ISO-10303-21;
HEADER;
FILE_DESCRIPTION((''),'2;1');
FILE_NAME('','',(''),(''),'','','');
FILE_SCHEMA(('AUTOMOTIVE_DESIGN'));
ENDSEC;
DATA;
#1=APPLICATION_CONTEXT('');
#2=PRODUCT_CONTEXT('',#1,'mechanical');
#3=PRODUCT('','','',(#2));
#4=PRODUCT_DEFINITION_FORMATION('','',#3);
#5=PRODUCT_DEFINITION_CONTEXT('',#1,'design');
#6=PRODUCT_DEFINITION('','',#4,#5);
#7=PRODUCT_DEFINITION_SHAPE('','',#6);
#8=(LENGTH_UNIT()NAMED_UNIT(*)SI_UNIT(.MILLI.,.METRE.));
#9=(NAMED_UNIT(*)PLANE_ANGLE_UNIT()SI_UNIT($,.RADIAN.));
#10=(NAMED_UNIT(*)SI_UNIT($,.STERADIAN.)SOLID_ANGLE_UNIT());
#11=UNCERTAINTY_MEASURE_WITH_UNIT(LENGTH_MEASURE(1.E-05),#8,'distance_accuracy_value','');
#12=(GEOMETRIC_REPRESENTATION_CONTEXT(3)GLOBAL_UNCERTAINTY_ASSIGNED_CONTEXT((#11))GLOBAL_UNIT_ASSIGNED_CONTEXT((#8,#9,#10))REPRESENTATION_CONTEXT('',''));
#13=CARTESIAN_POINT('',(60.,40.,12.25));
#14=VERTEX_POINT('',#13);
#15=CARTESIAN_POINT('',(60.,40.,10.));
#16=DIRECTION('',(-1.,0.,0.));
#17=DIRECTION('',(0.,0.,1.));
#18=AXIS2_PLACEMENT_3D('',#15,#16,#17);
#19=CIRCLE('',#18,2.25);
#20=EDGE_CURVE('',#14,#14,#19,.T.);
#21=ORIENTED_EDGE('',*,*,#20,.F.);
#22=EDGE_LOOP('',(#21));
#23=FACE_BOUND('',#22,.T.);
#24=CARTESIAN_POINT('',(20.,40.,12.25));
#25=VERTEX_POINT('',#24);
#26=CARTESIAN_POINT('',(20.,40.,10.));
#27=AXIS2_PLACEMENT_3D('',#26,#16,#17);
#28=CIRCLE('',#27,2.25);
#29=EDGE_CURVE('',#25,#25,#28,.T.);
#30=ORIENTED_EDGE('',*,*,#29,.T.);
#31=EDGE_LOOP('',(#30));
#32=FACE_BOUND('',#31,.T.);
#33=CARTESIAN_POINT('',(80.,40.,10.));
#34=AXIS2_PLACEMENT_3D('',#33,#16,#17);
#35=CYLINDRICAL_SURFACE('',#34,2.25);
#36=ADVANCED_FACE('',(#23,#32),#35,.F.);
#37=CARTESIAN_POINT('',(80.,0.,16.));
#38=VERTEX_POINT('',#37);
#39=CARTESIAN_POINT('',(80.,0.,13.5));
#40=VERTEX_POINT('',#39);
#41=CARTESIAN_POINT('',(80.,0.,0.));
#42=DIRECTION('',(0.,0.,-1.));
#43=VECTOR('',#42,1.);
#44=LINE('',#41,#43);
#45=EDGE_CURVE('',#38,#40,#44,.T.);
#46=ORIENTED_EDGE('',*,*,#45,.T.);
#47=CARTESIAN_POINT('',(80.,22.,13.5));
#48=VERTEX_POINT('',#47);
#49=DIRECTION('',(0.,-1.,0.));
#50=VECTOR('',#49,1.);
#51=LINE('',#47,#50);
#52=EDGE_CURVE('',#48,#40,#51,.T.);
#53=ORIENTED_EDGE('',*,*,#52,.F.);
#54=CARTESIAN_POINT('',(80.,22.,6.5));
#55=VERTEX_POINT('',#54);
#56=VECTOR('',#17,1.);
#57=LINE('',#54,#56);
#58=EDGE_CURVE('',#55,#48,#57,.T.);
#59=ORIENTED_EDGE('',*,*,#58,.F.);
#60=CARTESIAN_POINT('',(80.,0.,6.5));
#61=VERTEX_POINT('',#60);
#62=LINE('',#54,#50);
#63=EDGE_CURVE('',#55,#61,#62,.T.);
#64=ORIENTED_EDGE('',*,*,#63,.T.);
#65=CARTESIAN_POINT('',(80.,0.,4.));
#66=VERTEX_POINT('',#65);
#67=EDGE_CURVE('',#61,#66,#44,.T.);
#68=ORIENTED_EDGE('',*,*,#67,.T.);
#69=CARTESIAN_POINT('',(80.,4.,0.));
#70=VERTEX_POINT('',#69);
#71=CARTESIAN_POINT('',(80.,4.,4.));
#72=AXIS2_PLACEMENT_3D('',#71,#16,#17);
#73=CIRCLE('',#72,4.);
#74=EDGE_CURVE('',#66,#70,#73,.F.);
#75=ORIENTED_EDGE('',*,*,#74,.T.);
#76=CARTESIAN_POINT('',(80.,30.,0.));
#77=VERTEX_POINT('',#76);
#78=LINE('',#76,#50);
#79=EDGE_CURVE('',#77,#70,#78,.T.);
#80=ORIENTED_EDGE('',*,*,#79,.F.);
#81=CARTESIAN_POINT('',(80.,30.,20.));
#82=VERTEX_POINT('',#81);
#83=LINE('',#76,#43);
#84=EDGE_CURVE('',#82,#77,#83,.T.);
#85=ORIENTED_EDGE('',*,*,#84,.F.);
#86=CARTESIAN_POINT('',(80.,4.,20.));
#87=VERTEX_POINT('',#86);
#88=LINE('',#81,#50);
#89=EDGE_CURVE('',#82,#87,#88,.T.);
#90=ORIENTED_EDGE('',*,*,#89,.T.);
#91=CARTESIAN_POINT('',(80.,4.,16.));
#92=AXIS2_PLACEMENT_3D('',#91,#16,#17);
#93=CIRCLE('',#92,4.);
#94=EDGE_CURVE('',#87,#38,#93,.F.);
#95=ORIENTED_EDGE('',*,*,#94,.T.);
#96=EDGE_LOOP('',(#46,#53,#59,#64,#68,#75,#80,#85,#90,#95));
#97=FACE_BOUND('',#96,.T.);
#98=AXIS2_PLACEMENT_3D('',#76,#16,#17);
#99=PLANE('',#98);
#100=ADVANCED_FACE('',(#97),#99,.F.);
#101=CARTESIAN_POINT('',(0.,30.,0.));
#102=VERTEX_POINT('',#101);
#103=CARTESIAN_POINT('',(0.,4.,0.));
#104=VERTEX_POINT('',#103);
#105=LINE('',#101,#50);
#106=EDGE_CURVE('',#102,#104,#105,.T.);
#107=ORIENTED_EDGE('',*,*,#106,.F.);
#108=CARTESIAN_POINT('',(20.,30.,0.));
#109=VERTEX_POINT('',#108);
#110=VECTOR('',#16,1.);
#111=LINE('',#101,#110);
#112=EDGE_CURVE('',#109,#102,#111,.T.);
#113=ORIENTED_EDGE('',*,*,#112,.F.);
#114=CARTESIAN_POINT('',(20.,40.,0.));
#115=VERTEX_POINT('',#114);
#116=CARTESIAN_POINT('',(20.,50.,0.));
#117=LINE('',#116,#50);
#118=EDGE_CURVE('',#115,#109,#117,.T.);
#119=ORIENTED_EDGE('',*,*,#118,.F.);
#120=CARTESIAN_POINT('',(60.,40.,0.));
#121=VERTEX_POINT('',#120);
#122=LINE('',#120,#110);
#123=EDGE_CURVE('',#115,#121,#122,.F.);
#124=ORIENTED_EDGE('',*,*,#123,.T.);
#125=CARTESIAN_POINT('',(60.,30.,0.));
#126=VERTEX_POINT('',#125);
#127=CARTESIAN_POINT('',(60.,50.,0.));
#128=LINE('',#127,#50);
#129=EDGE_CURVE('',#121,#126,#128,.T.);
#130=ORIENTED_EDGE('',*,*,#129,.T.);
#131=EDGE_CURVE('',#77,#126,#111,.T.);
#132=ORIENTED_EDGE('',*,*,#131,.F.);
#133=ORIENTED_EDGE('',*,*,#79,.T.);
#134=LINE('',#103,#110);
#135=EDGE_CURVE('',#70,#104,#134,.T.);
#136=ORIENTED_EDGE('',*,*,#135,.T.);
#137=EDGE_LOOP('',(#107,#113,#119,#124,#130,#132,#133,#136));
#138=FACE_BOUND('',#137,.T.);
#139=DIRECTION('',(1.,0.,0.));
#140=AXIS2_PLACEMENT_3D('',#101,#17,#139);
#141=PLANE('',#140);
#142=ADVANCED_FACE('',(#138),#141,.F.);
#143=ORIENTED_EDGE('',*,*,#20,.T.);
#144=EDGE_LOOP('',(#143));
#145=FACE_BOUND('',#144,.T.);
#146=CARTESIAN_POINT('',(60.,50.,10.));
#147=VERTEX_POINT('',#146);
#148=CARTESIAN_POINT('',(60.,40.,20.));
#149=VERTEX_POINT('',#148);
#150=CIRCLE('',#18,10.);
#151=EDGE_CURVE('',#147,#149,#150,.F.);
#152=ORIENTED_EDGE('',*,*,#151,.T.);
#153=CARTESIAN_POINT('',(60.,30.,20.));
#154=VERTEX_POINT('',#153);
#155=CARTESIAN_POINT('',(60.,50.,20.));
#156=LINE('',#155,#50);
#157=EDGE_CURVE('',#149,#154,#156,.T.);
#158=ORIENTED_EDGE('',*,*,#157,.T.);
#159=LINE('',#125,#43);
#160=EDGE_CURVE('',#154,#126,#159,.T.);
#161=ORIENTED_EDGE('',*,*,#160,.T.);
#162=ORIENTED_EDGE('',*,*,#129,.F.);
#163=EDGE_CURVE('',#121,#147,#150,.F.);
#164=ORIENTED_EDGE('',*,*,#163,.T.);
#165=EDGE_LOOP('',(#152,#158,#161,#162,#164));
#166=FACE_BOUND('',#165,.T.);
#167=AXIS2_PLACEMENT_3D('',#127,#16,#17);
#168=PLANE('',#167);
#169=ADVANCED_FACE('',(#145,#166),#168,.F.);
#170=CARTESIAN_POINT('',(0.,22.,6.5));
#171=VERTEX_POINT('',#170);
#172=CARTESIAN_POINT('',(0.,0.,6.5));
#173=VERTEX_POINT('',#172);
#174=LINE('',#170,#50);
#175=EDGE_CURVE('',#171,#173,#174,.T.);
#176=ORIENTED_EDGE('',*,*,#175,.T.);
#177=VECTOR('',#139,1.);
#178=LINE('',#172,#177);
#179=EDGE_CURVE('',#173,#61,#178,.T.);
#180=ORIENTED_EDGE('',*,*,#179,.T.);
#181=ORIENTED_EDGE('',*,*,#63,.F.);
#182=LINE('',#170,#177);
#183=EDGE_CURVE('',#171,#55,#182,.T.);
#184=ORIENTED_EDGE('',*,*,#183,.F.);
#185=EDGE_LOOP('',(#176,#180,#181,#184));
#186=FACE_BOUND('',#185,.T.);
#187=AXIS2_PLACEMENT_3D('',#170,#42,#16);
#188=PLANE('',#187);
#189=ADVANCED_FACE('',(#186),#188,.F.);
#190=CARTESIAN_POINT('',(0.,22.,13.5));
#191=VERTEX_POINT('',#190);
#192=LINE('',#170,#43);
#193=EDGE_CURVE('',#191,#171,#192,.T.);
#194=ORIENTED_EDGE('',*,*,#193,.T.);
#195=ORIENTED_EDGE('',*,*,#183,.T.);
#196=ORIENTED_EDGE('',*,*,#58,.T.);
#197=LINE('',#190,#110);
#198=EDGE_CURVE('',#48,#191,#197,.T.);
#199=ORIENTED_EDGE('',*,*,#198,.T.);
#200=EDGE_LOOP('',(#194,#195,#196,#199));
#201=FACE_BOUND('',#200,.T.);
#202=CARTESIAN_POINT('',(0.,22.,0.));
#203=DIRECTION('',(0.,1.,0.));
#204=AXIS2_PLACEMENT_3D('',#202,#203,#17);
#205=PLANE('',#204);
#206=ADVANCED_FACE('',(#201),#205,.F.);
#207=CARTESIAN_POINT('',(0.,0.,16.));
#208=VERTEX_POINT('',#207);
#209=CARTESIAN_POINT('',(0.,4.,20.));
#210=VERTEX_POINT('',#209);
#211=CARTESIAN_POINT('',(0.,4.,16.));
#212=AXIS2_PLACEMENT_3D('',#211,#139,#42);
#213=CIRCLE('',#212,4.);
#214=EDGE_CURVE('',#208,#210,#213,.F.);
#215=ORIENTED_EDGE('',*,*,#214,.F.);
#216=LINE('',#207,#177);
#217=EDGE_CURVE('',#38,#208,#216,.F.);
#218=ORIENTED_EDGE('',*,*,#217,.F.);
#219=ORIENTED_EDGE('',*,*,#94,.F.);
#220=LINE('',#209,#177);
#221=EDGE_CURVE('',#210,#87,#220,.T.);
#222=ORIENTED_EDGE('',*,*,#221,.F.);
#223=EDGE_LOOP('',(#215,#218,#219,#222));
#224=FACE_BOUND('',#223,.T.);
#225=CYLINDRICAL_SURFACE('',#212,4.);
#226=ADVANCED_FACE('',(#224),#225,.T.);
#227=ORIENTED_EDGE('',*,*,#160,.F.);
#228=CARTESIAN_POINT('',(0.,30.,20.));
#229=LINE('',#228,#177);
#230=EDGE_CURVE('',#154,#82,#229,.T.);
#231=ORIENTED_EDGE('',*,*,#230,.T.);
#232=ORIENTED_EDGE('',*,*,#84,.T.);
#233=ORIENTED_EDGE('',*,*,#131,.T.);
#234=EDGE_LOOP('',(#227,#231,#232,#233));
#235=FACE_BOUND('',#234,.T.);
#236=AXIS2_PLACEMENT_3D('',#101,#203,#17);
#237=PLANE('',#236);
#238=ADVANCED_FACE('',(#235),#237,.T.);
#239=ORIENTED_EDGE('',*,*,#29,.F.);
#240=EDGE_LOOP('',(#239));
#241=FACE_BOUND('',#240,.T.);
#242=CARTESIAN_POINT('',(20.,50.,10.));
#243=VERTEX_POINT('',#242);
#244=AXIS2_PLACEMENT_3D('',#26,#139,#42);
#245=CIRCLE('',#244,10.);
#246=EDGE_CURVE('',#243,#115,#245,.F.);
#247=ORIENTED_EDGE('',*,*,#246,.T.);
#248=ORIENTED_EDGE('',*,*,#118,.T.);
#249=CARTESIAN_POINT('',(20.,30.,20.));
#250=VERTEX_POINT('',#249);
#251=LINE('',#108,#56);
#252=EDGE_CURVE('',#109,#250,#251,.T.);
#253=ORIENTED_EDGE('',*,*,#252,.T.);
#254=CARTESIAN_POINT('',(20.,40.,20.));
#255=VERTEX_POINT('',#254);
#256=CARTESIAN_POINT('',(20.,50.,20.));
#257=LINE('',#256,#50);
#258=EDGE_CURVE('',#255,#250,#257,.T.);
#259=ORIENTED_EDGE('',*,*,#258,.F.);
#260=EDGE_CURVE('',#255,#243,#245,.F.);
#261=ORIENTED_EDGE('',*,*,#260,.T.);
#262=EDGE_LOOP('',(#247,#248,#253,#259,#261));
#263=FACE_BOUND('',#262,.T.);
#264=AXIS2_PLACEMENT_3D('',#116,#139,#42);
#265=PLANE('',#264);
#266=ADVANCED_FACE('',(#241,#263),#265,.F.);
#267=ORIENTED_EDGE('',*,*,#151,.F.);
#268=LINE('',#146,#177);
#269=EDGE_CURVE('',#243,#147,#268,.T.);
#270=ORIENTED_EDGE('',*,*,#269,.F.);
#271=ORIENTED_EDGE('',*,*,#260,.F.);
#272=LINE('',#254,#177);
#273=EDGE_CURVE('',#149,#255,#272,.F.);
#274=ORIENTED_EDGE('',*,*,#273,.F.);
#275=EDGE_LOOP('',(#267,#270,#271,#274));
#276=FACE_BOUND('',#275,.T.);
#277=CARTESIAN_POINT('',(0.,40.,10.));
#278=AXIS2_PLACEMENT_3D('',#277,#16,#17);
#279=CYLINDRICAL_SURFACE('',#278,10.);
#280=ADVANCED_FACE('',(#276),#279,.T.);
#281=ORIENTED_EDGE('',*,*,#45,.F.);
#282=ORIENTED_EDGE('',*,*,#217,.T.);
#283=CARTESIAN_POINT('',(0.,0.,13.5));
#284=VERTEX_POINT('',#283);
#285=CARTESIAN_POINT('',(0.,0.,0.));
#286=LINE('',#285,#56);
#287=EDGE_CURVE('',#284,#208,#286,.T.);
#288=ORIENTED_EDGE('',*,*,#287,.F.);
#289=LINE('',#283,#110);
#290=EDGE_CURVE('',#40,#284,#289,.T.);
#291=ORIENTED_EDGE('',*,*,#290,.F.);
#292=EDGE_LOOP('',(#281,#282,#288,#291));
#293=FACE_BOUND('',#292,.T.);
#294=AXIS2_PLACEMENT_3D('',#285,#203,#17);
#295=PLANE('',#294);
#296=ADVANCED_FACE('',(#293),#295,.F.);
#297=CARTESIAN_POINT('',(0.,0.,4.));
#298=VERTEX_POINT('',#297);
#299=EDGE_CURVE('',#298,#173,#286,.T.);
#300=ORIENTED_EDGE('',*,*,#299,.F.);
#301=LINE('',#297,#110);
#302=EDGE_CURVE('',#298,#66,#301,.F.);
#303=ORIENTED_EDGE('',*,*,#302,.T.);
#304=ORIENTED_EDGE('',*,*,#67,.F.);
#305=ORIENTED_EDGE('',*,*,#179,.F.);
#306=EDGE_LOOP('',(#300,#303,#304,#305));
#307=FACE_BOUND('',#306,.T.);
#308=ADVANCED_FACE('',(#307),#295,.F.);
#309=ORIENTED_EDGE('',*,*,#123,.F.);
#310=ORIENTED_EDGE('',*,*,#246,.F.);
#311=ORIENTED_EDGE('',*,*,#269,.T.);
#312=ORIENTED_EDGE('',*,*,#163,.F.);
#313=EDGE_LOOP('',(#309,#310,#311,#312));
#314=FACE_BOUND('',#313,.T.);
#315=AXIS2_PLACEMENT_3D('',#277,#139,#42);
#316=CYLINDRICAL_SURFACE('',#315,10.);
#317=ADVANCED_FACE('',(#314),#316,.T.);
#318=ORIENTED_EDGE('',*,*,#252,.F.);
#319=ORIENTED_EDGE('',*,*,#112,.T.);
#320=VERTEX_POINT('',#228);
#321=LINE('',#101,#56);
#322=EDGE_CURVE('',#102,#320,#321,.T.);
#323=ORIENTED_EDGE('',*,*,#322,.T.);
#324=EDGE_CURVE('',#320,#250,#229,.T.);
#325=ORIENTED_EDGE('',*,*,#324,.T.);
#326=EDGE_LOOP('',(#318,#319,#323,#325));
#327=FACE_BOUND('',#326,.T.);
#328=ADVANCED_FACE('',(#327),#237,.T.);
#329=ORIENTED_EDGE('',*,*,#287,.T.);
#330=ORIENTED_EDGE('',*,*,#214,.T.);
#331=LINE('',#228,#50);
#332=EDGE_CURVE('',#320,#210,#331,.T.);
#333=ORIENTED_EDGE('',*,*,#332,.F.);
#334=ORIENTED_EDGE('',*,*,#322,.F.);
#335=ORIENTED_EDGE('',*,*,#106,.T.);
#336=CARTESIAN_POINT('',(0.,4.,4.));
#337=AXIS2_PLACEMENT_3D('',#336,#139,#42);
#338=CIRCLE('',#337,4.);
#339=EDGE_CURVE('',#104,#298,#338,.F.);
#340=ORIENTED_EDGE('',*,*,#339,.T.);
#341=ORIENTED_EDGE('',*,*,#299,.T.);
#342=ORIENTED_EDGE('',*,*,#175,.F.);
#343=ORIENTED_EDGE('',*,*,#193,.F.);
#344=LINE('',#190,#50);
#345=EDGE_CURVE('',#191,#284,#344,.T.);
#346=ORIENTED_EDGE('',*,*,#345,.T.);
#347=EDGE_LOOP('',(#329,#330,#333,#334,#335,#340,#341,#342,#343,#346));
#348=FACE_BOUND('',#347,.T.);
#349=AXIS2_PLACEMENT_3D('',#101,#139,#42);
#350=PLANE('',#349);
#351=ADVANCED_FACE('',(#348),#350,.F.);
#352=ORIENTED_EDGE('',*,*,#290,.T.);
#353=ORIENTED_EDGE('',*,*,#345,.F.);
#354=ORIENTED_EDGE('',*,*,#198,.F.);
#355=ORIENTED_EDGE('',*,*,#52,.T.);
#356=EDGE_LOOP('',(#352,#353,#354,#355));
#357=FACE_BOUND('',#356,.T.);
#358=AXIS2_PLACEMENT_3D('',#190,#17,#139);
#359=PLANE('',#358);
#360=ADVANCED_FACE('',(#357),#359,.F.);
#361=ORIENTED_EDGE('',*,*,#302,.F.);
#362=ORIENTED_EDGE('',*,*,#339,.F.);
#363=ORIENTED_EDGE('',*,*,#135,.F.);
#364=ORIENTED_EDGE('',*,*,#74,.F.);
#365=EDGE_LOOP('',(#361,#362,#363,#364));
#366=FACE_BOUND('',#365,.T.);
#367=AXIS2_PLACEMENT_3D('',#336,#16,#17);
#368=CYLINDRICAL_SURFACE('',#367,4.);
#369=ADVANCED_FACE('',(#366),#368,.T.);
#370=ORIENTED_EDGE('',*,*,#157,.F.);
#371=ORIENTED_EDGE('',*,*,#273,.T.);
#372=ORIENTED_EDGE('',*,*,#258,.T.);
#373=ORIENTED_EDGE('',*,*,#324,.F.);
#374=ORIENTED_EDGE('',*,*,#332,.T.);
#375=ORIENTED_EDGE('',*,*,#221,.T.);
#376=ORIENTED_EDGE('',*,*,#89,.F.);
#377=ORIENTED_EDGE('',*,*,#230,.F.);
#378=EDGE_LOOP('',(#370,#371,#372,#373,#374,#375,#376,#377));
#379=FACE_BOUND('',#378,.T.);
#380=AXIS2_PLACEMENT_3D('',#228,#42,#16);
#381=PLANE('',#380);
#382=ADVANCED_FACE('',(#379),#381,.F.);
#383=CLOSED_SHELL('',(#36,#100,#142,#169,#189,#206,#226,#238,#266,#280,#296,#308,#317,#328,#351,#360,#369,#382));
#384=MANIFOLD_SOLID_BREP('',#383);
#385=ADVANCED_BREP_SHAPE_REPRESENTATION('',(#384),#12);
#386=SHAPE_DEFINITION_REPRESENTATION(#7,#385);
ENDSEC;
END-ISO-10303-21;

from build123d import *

# Parameters (mm, degrees)
SKETCH1_W           = 80
SKETCH1_H           = 20
BOSS_EXTRUDE1_DEPTH = 30
SKETCH2_W           = 80
SKETCH2_H           = 7
CUT_EXTRUDE1_DEPTH  = 22
SKETCH3_W           = 40
SKETCH3_H           = 20
BOSS_EXTRUDE2_DEPTH = 20
SKETCH4_R           = 2.25
CUT_EXTRUDE2_DEPTH  = 81.622577483
FILLET1_R           = 10
FILLET2_R           = 4


with BuildPart() as part:
    # Sketch1 → Boss-Extrude1 (new body)
    with BuildSketch(Plane(origin=(0, 0, 0), x_dir=(1, 0, 0), z_dir=(0, 1, 0))):
        with Locations((40, -10)):
            Rectangle(SKETCH1_W, SKETCH1_H)
    extrude(amount=BOSS_EXTRUDE1_DEPTH)

    # Sketch2 → Cut-Extrude1 (cut)
    with BuildSketch(Plane(origin=(0, 0, 0), x_dir=(-1, 0, 0), z_dir=(0, -1, 0))):
        with Locations((-40, -10)):
            Rectangle(SKETCH2_W, SKETCH2_H)
    extrude(amount=-CUT_EXTRUDE1_DEPTH, mode=Mode.SUBTRACT)

    # Sketch3 → Boss-Extrude2 (add)
    with BuildSketch(Plane(origin=(0, 30, 0), x_dir=(1, 0, 0), z_dir=(0, 1, 0))):
        with Locations((40, -10)):
            Rectangle(SKETCH3_W, SKETCH3_H)
    extrude(amount=BOSS_EXTRUDE2_DEPTH)

    # Sketch4 → Cut-Extrude2 (cut, through all)
    with BuildSketch(Plane.ZY.offset(-20)):
        with Locations((10, 40)):
            Circle(SKETCH4_R)
    extrude(amount=-CUT_EXTRUDE2_DEPTH, mode=Mode.SUBTRACT)

    # Fillet1
    fillet1_edges = [part.edges().sort_by_distance(p)[0] for p in [
        (40, 50, 0),
        (40, 50, 20),
    ]]
    fillet(fillet1_edges, radius=FILLET1_R - 0.0001)  # a hair under: the kernel refuses the full size

    # Fillet2
    fillet2_edges = [part.edges().sort_by_distance(p)[0] for p in [
        (40, 0, 0),
        (40, 0, 20),
    ]]
    fillet(fillet2_edges, radius=FILLET2_R)


solid = part.part
